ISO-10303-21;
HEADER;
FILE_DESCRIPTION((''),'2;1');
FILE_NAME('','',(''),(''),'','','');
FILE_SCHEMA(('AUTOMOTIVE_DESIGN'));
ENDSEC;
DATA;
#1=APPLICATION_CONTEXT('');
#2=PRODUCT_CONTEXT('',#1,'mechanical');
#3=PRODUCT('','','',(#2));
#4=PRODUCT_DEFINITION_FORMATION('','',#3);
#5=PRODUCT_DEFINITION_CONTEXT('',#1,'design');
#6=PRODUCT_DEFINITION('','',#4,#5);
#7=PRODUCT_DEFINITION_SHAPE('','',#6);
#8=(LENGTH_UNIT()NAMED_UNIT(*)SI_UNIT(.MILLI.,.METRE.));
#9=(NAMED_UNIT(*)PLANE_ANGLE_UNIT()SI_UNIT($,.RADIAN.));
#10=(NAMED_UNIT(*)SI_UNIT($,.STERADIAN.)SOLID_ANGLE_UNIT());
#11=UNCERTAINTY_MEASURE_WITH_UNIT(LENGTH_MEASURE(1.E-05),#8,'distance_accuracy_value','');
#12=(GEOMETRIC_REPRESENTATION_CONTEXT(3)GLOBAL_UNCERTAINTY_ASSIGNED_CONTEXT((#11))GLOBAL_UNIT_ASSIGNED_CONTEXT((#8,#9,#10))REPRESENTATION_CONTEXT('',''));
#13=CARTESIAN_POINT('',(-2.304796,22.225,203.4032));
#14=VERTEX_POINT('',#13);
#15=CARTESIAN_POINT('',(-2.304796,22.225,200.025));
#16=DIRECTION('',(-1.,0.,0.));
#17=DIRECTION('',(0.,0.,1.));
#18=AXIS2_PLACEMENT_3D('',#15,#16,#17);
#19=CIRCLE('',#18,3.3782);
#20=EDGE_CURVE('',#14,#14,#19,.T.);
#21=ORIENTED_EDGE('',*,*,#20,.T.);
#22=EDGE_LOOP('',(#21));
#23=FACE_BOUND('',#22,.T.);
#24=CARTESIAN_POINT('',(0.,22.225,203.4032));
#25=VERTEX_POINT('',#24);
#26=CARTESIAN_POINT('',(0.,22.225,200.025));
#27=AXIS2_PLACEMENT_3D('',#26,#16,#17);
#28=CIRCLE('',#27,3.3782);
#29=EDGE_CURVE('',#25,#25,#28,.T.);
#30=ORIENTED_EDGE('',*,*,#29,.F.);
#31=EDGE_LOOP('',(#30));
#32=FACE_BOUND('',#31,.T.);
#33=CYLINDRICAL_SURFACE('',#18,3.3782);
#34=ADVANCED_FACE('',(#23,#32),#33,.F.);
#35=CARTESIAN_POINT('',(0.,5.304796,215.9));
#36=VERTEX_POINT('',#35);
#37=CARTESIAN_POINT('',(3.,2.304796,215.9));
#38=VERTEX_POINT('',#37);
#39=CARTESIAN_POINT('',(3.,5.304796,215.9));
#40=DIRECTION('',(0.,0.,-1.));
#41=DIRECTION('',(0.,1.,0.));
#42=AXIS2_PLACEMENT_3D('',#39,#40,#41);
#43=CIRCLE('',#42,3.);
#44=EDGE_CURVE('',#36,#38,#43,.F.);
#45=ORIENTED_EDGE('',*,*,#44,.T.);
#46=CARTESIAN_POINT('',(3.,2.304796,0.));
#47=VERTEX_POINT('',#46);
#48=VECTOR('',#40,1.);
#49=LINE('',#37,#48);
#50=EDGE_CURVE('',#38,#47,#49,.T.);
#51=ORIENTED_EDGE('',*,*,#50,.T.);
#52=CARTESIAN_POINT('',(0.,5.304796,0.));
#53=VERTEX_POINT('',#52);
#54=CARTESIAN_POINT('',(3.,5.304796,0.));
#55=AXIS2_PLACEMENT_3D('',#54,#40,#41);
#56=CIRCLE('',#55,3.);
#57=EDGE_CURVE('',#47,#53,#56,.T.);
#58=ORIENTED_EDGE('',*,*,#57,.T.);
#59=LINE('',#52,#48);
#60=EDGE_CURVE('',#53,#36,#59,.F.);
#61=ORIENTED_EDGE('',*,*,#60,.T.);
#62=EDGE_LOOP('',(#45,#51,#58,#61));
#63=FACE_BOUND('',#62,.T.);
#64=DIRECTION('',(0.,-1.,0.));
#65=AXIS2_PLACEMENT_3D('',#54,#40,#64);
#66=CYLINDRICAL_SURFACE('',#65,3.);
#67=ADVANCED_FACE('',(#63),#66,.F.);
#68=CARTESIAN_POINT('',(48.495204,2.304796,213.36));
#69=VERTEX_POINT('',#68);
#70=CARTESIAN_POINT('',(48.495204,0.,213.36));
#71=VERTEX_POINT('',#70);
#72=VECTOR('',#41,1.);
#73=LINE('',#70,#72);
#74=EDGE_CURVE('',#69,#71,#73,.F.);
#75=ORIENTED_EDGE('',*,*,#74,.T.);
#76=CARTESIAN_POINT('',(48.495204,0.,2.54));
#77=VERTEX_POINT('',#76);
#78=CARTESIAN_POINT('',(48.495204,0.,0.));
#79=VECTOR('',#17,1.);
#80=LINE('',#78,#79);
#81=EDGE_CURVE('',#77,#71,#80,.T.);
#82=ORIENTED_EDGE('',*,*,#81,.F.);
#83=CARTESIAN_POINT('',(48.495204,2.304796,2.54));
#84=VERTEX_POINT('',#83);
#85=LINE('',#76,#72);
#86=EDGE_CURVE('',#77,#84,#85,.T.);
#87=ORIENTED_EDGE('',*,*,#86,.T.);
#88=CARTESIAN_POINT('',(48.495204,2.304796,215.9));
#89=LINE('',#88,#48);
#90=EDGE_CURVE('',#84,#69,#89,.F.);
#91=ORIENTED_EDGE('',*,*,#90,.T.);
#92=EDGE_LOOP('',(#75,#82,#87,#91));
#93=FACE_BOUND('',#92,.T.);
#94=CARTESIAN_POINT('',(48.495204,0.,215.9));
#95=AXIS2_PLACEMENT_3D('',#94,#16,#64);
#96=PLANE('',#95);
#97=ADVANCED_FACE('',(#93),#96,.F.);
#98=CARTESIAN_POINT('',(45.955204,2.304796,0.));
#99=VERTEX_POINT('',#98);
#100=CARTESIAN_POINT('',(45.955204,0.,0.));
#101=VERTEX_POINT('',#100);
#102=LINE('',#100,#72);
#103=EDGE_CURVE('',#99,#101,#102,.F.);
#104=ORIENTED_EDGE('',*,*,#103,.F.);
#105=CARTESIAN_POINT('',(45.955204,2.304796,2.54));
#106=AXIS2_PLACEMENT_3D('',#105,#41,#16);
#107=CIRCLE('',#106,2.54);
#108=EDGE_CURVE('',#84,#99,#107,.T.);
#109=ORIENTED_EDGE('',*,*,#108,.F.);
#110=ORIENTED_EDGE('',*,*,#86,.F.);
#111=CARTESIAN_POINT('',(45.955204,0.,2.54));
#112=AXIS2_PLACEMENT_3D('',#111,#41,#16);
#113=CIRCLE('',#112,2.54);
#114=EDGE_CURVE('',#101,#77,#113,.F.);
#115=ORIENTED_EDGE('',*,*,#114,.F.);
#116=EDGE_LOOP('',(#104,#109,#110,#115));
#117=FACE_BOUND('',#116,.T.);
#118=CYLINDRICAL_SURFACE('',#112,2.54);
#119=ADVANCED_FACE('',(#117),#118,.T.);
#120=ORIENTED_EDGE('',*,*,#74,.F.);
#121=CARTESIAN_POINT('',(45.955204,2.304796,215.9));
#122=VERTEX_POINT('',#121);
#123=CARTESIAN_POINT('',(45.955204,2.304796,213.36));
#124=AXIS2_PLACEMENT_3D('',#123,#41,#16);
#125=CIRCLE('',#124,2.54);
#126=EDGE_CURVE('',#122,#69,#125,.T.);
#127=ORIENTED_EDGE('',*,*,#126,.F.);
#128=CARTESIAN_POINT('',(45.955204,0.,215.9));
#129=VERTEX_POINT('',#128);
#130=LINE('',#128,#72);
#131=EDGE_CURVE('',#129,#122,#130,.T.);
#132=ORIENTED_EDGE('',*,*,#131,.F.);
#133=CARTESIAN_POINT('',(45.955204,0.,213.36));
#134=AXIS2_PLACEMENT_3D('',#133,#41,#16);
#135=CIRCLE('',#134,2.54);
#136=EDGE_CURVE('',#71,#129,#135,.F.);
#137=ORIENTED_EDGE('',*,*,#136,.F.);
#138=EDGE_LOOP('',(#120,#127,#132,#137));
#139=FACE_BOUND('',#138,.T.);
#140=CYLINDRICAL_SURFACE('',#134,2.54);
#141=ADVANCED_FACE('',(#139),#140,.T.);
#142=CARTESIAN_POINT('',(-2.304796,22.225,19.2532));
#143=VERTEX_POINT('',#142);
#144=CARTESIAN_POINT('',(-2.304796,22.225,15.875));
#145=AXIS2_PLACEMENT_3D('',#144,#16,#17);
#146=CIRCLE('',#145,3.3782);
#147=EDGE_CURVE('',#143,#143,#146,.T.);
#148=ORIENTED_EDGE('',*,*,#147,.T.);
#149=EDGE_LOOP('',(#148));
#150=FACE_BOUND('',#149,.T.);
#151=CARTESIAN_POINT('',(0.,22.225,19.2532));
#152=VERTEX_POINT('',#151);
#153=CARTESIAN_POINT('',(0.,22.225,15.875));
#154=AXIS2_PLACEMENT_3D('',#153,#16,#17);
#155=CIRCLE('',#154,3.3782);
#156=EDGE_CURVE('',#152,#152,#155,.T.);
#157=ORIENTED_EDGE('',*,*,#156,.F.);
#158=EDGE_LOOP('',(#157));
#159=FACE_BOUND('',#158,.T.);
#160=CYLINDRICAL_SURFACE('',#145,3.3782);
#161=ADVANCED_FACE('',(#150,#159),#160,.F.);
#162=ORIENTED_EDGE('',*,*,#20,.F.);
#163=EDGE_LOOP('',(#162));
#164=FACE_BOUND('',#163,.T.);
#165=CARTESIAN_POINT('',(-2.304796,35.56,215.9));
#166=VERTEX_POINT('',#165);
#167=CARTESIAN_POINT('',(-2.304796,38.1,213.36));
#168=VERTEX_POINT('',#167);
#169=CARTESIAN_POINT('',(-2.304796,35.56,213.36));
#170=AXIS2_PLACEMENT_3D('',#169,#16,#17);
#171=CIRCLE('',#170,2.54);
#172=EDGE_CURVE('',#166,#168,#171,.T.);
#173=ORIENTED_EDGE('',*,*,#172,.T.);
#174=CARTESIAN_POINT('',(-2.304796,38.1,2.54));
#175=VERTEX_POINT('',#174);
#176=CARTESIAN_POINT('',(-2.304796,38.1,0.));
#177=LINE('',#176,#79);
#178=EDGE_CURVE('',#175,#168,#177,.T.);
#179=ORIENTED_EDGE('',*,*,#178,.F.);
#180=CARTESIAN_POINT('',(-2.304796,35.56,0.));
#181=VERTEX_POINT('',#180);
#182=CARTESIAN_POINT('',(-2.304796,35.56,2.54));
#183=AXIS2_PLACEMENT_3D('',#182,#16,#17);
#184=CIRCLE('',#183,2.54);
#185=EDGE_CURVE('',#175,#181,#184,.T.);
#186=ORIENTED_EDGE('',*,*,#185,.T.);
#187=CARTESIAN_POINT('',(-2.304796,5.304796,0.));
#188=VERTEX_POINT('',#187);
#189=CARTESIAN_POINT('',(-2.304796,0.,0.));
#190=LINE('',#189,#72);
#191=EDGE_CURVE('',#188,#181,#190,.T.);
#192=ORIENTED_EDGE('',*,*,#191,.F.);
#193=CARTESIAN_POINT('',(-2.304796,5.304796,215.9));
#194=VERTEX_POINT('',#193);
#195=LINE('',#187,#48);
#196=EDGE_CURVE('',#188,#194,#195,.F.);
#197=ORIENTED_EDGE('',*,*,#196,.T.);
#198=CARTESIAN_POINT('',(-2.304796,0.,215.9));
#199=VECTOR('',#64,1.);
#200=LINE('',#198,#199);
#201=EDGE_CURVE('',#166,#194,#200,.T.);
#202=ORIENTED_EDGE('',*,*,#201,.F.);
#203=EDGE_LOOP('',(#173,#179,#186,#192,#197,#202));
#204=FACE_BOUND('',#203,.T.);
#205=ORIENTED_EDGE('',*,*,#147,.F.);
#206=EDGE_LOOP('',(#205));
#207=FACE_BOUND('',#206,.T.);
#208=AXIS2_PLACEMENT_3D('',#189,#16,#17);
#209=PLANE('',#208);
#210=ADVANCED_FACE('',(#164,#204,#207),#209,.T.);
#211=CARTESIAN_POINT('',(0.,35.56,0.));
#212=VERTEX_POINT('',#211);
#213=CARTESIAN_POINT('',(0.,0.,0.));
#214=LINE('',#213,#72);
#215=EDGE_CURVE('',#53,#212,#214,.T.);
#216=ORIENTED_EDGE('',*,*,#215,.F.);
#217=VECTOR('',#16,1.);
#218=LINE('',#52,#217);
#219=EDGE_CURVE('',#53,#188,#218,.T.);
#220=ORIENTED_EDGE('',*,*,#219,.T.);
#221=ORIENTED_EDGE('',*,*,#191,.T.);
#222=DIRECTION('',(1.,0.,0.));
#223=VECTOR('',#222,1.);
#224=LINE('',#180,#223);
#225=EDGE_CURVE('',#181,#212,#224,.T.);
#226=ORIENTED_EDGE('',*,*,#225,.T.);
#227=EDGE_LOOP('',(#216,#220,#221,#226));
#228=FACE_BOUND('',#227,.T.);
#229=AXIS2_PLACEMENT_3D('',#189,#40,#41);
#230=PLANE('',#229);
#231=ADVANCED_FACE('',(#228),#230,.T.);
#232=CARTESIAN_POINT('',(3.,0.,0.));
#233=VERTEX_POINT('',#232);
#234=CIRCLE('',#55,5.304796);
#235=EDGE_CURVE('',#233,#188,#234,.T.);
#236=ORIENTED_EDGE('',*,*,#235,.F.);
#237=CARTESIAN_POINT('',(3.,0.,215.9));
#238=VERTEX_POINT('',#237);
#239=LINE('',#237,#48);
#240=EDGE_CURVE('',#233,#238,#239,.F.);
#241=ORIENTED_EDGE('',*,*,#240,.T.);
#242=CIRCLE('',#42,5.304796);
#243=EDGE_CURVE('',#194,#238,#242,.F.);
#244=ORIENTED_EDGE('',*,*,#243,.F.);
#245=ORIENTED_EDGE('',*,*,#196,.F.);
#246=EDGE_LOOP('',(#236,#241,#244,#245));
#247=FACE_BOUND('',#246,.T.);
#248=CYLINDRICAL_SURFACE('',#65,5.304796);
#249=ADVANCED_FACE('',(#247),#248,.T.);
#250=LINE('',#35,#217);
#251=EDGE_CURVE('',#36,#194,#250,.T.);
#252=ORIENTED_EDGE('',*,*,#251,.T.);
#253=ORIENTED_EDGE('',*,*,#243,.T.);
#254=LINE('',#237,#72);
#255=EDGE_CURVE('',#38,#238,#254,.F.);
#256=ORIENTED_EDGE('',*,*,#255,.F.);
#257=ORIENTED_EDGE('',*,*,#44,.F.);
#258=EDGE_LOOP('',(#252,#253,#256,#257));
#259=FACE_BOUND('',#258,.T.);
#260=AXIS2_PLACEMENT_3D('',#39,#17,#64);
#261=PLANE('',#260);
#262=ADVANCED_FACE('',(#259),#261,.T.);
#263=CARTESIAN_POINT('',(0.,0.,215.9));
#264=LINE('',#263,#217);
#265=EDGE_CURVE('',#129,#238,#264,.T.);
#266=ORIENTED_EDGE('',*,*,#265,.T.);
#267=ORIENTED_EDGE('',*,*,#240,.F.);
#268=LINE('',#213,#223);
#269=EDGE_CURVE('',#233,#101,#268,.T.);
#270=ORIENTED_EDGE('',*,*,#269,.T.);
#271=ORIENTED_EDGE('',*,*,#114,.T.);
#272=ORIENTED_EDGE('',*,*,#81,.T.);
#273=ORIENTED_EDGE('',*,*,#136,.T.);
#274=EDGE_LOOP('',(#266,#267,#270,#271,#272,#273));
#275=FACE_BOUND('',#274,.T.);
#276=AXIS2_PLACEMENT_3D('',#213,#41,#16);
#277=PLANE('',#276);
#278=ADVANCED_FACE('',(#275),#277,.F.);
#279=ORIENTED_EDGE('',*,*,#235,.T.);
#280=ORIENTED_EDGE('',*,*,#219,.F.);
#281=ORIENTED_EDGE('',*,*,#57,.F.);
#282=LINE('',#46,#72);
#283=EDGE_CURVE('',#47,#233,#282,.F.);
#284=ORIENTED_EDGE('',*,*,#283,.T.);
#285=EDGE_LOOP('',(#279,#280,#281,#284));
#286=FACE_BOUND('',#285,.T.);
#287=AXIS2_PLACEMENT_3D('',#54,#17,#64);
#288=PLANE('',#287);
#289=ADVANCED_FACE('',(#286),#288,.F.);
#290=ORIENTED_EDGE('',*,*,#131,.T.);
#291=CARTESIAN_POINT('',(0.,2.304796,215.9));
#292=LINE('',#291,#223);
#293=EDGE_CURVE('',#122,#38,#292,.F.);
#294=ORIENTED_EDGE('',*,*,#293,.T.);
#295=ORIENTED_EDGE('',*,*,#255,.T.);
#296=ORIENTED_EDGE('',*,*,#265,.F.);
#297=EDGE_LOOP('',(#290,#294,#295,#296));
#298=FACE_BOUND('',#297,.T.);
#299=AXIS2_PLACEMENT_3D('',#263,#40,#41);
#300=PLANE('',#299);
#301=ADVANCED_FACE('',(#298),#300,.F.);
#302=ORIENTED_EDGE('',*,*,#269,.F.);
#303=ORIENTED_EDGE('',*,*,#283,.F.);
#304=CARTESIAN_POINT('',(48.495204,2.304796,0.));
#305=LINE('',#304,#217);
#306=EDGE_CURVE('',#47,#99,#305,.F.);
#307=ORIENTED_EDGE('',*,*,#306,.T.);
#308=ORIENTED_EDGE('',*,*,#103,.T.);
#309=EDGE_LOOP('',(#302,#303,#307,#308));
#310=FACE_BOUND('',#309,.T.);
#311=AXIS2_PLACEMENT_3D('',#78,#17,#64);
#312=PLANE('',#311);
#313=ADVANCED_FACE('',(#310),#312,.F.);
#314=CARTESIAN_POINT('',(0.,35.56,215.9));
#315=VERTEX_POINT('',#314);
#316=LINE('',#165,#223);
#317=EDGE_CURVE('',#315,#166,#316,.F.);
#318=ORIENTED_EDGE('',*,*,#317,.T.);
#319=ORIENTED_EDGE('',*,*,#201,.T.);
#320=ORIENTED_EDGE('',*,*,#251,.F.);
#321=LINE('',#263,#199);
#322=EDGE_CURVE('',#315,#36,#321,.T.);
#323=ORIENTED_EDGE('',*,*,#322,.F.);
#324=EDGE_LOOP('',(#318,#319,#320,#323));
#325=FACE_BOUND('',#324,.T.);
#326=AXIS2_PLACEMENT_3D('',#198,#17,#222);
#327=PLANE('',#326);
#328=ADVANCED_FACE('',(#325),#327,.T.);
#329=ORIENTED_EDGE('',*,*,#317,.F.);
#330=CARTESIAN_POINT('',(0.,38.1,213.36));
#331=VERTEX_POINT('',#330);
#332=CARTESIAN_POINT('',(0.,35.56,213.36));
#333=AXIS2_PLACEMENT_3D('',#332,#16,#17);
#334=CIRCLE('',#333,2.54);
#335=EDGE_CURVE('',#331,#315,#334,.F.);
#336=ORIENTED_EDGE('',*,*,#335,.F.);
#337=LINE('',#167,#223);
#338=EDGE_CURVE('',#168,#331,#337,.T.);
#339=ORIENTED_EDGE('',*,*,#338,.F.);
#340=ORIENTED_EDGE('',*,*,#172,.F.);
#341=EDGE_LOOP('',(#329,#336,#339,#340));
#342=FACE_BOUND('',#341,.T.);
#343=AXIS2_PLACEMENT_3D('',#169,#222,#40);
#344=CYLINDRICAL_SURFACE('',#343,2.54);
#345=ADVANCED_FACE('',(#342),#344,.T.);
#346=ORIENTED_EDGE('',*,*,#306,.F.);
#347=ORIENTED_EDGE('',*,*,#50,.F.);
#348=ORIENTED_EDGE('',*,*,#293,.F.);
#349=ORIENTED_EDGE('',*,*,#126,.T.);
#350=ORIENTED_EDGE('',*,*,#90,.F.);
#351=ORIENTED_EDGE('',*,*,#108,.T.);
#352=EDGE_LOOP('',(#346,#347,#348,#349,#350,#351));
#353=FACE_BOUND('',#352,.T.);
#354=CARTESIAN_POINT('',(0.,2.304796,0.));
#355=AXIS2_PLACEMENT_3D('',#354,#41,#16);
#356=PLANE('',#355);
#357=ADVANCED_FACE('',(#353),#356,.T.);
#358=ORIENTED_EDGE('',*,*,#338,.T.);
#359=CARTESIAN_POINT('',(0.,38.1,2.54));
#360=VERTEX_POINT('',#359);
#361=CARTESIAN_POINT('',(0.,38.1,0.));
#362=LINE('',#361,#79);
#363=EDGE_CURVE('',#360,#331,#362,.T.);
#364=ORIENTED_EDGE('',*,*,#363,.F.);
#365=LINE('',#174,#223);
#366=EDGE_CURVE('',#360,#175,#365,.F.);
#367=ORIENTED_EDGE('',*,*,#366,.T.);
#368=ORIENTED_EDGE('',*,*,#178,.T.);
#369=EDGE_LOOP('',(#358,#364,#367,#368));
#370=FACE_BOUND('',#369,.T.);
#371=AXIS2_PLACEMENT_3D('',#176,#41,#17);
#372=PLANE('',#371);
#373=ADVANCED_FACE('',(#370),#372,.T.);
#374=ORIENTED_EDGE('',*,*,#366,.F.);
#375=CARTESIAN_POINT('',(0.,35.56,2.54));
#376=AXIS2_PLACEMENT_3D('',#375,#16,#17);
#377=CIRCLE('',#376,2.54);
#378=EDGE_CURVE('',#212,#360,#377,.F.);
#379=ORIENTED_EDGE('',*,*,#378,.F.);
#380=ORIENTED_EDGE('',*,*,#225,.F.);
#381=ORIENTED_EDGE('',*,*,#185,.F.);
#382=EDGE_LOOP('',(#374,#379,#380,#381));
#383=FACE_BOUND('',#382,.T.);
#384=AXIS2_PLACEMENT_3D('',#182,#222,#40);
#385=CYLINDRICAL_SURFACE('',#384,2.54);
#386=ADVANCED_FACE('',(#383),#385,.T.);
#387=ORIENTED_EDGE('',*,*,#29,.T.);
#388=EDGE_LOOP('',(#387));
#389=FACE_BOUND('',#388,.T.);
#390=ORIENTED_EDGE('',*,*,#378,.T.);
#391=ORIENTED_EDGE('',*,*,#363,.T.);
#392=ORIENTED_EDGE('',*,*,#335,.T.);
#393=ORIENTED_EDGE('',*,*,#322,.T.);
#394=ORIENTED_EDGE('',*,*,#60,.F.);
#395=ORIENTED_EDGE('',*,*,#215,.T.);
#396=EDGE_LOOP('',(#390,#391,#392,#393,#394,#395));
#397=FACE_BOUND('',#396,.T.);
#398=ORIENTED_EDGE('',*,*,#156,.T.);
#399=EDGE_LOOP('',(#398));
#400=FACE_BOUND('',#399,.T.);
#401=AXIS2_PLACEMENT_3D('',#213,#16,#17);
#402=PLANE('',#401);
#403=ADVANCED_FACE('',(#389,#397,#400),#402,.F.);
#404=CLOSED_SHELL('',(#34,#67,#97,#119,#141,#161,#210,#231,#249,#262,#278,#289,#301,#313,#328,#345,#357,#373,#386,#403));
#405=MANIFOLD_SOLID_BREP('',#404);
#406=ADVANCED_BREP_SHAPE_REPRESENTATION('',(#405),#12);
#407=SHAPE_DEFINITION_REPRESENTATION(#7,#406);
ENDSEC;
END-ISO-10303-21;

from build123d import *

# Parameters (mm, degrees)
SKETCH1_W                    = 38.1
SKETCH1_H                    = 215.9
BASE_FLANGE1_DEPTH           = 2.304796
EDGE_FLANGE1_STRIP_W         = 15.219184
EDGE_FLANGE1_STRIP_H         = 2.304796
EDGE_FLANGE1_STRIP_CUT_DEPTH = 215.9
EDGE_FLANGE1_DEPTH           = 215.9
F_1_4_CLEARANCE_HOLE1_D      = 6.7564
FILLET1_R                    = 2.54


# Sheet-metal steps are written as plain solids
with BuildPart() as part:
    # Sketch1 → Base-Flange1 (new body)
    with BuildSketch(Plane(origin=(0, 0, 0), x_dir=(0, -1, 0), z_dir=(1, 0, 0))):
        with Locations((-19.05, -107.95)):
            Rectangle(SKETCH1_W, SKETCH1_H)
    extrude(amount=-BASE_FLANGE1_DEPTH)

    # Edge-Flange1 strip (across the edge) → Edge-Flange1 strip cut (cut)
    with BuildSketch(Plane.YX.offset(-215.9)):
        with Locations((-2.304796, -1.152398)):
            Rectangle(EDGE_FLANGE1_STRIP_W, EDGE_FLANGE1_STRIP_H)
    extrude(amount=EDGE_FLANGE1_STRIP_CUT_DEPTH, mode=Mode.SUBTRACT)

    # Edge-Flange1 section (across the edge) → Edge-Flange1 (add)
    with BuildSketch(Plane.YX.offset(-215.9)):
        with BuildLine():
            Line((0, 3), (0, 48.495204))
            Line((0, 48.495204), (2.304796, 48.495204))
            Line((2.304796, 48.495204), (2.304796, 3))
            ThreePointArc((2.304796, 3), (3.183475656, 0.878679656), (5.304796, 0))
            Line((5.304796, 0), (5.304796, -2.304796))
            ThreePointArc((5.304796, -2.304796), (1.553738776, -0.751057224), (0, 3))
        make_face()
    extrude(amount=EDGE_FLANGE1_DEPTH)

    # 1/4 Clearance Hole1 (through all)
    with Locations(Plane.ZY.offset(2.304796)):
        with Locations((15.875, 22.225), (200.025, 22.225)):
            Hole(F_1_4_CLEARANCE_HOLE1_D / 2)

    # Fillet1
    fillet1_edges = [part.edges().sort_by_distance(p)[0] for p in [
        (48.495204, 1.152398, 215.9),
        (48.495204, 1.152398, 0),
        (-1.152398, 38.1, 215.9),
        (-1.152398, 38.1, 0),
    ]]
    fillet(fillet1_edges, radius=FILLET1_R)


solid = part.part
